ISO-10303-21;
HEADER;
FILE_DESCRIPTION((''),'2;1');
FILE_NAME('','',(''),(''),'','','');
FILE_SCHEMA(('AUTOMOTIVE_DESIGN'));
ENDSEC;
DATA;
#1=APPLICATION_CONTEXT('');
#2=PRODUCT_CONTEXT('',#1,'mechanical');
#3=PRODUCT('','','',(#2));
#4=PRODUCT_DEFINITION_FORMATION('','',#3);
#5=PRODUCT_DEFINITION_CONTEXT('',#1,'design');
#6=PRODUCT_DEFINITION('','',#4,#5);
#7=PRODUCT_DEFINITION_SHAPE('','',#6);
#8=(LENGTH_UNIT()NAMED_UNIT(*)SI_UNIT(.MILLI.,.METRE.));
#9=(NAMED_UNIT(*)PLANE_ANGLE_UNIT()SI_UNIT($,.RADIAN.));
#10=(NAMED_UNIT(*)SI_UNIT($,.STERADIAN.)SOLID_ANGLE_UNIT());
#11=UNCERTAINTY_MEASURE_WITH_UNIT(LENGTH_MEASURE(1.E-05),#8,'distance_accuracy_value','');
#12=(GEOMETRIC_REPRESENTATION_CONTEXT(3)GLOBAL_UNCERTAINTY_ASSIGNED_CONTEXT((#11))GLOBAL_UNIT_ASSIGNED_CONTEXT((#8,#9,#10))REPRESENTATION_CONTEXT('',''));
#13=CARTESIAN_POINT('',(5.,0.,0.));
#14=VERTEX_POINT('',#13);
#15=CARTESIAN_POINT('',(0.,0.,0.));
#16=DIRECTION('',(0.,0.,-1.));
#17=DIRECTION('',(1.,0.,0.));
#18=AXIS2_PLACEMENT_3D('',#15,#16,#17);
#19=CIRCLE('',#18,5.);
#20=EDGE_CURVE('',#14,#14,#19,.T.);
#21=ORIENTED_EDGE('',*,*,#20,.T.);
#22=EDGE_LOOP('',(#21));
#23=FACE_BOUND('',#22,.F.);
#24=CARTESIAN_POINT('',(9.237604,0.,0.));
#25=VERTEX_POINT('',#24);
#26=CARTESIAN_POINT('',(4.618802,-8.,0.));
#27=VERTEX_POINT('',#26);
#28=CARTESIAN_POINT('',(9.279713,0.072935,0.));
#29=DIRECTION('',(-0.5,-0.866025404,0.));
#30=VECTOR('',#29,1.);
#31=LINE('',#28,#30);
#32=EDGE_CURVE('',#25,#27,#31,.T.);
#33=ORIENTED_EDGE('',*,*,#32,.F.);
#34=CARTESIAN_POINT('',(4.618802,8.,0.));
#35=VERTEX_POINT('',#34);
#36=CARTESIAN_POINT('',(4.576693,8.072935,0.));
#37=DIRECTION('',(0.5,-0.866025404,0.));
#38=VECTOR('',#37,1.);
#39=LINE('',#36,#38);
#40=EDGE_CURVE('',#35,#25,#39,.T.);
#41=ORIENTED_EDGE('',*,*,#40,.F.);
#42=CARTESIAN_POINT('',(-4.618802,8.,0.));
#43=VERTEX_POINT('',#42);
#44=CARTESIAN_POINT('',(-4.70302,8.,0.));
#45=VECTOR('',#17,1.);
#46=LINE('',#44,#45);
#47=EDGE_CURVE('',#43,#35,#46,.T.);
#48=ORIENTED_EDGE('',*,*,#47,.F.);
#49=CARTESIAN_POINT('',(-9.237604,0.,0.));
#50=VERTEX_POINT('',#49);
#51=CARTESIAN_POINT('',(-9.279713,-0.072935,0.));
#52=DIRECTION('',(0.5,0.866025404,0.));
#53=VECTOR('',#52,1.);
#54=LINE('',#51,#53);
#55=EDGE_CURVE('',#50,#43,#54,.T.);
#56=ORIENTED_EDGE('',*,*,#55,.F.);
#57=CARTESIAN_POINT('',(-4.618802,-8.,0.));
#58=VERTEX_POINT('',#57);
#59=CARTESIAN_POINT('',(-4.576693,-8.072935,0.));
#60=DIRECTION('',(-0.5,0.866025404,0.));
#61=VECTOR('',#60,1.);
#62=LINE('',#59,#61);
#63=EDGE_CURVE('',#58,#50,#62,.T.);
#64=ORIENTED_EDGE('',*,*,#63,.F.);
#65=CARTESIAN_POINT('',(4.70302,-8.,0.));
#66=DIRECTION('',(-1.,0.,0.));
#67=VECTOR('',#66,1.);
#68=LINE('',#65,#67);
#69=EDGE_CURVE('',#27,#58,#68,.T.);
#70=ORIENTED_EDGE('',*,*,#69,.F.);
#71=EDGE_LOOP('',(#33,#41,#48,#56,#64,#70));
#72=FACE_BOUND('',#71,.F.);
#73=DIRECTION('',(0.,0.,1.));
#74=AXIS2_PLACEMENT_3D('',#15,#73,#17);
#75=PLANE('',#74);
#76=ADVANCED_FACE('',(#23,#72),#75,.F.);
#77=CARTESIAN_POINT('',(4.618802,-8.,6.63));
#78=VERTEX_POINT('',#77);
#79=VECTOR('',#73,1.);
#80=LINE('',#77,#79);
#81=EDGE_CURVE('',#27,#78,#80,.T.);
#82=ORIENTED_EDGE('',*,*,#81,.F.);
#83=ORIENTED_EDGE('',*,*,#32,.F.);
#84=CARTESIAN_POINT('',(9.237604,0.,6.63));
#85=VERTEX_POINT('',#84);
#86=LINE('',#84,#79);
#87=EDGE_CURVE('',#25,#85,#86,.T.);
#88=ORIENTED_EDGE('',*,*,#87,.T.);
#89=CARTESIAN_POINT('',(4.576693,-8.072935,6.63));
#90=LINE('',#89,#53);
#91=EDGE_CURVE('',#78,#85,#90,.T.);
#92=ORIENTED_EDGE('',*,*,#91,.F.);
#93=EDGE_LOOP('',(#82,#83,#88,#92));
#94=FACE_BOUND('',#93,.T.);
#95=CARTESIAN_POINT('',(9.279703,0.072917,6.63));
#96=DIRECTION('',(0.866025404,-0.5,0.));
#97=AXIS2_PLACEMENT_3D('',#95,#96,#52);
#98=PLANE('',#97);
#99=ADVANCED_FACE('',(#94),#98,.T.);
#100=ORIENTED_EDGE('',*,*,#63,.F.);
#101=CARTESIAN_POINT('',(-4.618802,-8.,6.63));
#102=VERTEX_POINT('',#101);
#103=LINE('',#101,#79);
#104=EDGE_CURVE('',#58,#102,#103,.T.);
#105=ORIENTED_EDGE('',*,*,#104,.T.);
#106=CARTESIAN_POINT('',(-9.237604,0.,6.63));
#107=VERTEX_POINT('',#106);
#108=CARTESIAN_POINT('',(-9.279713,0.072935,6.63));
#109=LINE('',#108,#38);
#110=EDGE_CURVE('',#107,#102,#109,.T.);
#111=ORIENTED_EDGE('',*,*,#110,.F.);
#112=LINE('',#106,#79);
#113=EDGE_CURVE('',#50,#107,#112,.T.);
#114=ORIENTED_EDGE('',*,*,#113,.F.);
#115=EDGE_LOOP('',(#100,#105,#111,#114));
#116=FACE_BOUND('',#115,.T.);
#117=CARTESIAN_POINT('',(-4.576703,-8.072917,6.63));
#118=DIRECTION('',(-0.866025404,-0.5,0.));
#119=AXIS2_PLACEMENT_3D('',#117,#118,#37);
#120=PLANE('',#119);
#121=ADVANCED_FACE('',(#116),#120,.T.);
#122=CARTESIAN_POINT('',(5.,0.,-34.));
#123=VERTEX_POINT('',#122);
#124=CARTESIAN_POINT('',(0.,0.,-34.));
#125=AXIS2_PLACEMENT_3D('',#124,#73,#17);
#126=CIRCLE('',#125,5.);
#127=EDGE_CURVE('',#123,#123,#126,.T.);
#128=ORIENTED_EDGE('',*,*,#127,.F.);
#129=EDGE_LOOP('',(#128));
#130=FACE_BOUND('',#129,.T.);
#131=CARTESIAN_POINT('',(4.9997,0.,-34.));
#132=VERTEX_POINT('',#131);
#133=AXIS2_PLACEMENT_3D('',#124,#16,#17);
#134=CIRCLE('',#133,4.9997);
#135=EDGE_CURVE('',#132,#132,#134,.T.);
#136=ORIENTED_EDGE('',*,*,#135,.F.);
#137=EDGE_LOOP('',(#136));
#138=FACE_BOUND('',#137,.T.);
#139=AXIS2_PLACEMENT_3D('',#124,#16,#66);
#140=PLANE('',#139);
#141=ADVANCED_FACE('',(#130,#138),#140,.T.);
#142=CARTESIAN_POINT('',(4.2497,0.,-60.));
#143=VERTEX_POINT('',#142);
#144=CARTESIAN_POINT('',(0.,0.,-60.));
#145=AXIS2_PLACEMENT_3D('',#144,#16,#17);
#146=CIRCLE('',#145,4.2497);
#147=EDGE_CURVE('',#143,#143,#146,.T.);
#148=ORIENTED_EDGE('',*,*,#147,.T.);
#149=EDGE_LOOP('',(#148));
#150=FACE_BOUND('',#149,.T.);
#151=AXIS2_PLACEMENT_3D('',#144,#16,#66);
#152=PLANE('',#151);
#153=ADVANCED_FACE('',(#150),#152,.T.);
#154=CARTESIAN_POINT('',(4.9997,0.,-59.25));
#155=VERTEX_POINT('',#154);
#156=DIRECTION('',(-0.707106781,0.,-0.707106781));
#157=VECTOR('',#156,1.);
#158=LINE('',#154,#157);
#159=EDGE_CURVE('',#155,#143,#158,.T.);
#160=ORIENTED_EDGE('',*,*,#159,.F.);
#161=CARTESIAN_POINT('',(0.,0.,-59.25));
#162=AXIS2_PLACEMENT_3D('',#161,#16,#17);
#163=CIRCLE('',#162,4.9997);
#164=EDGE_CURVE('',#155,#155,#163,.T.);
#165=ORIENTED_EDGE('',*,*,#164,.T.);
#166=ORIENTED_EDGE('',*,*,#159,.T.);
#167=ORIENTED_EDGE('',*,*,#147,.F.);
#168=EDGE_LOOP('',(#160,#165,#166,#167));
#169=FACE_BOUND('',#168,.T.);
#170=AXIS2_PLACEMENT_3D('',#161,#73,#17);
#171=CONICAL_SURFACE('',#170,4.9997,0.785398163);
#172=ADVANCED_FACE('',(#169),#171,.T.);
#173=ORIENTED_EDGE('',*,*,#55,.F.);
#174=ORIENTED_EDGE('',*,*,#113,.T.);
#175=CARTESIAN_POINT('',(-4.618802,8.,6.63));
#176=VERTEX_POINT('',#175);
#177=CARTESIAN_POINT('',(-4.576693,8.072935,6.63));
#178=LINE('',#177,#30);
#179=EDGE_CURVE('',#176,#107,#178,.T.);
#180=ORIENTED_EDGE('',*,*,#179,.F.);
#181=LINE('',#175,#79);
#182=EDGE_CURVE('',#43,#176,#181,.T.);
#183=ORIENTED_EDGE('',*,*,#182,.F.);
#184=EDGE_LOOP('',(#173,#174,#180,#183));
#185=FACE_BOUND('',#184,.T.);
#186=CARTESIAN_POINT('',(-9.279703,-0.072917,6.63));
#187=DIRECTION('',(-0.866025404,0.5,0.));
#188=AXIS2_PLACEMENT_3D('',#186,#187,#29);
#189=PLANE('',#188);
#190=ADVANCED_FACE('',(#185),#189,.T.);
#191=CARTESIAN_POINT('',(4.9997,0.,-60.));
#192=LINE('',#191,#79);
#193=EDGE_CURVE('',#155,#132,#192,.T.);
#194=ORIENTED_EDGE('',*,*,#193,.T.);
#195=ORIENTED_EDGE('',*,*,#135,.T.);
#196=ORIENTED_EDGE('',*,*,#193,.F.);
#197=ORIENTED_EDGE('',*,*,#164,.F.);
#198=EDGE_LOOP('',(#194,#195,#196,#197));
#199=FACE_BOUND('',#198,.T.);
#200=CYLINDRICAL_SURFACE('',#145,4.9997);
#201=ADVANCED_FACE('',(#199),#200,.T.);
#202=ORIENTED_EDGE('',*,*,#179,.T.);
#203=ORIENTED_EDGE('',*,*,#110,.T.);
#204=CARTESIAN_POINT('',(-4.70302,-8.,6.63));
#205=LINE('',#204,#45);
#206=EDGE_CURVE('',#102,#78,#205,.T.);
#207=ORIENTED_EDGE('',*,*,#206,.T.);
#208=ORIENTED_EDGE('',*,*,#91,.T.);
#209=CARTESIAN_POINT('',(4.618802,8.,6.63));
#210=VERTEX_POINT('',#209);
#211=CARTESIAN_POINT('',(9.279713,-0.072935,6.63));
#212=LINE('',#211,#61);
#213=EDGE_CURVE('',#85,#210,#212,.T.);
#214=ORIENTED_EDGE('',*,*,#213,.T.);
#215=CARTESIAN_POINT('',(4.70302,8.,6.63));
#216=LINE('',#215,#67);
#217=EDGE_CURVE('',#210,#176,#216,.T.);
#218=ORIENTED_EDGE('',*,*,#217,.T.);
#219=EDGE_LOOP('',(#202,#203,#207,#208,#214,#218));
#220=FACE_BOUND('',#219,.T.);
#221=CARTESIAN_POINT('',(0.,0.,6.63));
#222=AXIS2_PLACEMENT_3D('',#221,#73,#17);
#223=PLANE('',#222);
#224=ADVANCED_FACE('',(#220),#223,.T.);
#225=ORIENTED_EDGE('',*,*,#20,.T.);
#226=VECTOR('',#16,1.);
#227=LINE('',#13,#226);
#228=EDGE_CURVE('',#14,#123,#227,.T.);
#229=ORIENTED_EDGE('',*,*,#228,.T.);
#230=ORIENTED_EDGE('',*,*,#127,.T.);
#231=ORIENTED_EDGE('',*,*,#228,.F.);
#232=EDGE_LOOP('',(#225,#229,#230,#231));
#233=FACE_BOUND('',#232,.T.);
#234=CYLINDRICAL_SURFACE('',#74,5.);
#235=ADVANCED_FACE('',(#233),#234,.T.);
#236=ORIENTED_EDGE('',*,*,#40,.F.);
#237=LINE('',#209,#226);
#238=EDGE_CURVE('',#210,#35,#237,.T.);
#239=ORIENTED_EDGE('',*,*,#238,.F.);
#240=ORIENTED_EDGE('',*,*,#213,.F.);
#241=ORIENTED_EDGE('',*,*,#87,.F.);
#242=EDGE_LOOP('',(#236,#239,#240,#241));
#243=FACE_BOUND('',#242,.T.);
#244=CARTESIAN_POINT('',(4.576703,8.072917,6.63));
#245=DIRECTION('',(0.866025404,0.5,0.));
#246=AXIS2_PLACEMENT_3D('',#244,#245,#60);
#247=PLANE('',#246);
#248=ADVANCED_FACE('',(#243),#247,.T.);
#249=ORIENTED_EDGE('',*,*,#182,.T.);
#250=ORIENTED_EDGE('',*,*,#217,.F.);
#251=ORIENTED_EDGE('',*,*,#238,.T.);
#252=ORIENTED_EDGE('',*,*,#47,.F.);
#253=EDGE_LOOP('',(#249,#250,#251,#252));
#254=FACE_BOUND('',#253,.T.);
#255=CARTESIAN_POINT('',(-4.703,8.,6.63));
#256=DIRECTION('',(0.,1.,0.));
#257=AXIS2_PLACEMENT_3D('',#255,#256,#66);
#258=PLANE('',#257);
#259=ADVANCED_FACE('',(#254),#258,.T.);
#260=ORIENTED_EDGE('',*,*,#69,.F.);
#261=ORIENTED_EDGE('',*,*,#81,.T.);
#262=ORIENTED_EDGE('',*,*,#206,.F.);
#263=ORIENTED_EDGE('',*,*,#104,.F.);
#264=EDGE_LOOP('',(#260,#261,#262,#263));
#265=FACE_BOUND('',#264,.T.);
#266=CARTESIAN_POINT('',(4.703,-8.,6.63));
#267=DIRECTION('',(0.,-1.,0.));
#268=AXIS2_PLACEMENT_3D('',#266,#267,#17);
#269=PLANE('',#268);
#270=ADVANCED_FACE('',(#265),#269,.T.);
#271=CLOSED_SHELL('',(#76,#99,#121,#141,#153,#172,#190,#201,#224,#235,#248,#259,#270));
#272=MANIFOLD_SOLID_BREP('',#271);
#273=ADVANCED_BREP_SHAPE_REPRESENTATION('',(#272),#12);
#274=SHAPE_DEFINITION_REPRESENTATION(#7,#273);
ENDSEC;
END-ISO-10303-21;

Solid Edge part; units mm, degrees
sketch "Sketch1" plane through (0, 0, 0) normal (0, 0, 1) x (1, 0, 0)
  circle A0 centre (0, 0) radius 9.28
  dimension "D1" = 18.56
extrude "Protrusion1" add sketch "Sketch1" along normal blind 6.63
sketch "Sketch2" plane through (0, 0, 0) normal (0, 0, -1) x (1, 0, 0)
  circle A0 centre (0, 0) radius 5
extrude "Protrusion2" add sketch "Sketch2" along normal blind 60
sketch "Sketch3" plane through (0, 0, -60) normal (0, 0, -1) x (1, 0, 0)
  circle A0 centre (0, 0) radius 4.9997
extrude "Cutout1" cut sketch "Sketch3" against normal blind 26 flip side to cut
chamfer "Chamfer_1" distance 0.75 angle 45 1 edges at (-4.9997, 0, -60)
sketch "Sketch4" plane through (0, 0, 6.63) normal (0, 0, 1) x (1, 0, 0)
  line L0 (-4.703, 8) -> (4.703, 8)
  dimension "D1" = 16
extrude "Cutout2" cut sketch "Sketch4" against normal up to next material side at (0, 8.05, 6.63)
pattern_circular "Pattern1" count 6 over 360 about axis through (0, 0, 6.63) along (0, 0, 1) of "Cutout2"
properties part number "24101209"
